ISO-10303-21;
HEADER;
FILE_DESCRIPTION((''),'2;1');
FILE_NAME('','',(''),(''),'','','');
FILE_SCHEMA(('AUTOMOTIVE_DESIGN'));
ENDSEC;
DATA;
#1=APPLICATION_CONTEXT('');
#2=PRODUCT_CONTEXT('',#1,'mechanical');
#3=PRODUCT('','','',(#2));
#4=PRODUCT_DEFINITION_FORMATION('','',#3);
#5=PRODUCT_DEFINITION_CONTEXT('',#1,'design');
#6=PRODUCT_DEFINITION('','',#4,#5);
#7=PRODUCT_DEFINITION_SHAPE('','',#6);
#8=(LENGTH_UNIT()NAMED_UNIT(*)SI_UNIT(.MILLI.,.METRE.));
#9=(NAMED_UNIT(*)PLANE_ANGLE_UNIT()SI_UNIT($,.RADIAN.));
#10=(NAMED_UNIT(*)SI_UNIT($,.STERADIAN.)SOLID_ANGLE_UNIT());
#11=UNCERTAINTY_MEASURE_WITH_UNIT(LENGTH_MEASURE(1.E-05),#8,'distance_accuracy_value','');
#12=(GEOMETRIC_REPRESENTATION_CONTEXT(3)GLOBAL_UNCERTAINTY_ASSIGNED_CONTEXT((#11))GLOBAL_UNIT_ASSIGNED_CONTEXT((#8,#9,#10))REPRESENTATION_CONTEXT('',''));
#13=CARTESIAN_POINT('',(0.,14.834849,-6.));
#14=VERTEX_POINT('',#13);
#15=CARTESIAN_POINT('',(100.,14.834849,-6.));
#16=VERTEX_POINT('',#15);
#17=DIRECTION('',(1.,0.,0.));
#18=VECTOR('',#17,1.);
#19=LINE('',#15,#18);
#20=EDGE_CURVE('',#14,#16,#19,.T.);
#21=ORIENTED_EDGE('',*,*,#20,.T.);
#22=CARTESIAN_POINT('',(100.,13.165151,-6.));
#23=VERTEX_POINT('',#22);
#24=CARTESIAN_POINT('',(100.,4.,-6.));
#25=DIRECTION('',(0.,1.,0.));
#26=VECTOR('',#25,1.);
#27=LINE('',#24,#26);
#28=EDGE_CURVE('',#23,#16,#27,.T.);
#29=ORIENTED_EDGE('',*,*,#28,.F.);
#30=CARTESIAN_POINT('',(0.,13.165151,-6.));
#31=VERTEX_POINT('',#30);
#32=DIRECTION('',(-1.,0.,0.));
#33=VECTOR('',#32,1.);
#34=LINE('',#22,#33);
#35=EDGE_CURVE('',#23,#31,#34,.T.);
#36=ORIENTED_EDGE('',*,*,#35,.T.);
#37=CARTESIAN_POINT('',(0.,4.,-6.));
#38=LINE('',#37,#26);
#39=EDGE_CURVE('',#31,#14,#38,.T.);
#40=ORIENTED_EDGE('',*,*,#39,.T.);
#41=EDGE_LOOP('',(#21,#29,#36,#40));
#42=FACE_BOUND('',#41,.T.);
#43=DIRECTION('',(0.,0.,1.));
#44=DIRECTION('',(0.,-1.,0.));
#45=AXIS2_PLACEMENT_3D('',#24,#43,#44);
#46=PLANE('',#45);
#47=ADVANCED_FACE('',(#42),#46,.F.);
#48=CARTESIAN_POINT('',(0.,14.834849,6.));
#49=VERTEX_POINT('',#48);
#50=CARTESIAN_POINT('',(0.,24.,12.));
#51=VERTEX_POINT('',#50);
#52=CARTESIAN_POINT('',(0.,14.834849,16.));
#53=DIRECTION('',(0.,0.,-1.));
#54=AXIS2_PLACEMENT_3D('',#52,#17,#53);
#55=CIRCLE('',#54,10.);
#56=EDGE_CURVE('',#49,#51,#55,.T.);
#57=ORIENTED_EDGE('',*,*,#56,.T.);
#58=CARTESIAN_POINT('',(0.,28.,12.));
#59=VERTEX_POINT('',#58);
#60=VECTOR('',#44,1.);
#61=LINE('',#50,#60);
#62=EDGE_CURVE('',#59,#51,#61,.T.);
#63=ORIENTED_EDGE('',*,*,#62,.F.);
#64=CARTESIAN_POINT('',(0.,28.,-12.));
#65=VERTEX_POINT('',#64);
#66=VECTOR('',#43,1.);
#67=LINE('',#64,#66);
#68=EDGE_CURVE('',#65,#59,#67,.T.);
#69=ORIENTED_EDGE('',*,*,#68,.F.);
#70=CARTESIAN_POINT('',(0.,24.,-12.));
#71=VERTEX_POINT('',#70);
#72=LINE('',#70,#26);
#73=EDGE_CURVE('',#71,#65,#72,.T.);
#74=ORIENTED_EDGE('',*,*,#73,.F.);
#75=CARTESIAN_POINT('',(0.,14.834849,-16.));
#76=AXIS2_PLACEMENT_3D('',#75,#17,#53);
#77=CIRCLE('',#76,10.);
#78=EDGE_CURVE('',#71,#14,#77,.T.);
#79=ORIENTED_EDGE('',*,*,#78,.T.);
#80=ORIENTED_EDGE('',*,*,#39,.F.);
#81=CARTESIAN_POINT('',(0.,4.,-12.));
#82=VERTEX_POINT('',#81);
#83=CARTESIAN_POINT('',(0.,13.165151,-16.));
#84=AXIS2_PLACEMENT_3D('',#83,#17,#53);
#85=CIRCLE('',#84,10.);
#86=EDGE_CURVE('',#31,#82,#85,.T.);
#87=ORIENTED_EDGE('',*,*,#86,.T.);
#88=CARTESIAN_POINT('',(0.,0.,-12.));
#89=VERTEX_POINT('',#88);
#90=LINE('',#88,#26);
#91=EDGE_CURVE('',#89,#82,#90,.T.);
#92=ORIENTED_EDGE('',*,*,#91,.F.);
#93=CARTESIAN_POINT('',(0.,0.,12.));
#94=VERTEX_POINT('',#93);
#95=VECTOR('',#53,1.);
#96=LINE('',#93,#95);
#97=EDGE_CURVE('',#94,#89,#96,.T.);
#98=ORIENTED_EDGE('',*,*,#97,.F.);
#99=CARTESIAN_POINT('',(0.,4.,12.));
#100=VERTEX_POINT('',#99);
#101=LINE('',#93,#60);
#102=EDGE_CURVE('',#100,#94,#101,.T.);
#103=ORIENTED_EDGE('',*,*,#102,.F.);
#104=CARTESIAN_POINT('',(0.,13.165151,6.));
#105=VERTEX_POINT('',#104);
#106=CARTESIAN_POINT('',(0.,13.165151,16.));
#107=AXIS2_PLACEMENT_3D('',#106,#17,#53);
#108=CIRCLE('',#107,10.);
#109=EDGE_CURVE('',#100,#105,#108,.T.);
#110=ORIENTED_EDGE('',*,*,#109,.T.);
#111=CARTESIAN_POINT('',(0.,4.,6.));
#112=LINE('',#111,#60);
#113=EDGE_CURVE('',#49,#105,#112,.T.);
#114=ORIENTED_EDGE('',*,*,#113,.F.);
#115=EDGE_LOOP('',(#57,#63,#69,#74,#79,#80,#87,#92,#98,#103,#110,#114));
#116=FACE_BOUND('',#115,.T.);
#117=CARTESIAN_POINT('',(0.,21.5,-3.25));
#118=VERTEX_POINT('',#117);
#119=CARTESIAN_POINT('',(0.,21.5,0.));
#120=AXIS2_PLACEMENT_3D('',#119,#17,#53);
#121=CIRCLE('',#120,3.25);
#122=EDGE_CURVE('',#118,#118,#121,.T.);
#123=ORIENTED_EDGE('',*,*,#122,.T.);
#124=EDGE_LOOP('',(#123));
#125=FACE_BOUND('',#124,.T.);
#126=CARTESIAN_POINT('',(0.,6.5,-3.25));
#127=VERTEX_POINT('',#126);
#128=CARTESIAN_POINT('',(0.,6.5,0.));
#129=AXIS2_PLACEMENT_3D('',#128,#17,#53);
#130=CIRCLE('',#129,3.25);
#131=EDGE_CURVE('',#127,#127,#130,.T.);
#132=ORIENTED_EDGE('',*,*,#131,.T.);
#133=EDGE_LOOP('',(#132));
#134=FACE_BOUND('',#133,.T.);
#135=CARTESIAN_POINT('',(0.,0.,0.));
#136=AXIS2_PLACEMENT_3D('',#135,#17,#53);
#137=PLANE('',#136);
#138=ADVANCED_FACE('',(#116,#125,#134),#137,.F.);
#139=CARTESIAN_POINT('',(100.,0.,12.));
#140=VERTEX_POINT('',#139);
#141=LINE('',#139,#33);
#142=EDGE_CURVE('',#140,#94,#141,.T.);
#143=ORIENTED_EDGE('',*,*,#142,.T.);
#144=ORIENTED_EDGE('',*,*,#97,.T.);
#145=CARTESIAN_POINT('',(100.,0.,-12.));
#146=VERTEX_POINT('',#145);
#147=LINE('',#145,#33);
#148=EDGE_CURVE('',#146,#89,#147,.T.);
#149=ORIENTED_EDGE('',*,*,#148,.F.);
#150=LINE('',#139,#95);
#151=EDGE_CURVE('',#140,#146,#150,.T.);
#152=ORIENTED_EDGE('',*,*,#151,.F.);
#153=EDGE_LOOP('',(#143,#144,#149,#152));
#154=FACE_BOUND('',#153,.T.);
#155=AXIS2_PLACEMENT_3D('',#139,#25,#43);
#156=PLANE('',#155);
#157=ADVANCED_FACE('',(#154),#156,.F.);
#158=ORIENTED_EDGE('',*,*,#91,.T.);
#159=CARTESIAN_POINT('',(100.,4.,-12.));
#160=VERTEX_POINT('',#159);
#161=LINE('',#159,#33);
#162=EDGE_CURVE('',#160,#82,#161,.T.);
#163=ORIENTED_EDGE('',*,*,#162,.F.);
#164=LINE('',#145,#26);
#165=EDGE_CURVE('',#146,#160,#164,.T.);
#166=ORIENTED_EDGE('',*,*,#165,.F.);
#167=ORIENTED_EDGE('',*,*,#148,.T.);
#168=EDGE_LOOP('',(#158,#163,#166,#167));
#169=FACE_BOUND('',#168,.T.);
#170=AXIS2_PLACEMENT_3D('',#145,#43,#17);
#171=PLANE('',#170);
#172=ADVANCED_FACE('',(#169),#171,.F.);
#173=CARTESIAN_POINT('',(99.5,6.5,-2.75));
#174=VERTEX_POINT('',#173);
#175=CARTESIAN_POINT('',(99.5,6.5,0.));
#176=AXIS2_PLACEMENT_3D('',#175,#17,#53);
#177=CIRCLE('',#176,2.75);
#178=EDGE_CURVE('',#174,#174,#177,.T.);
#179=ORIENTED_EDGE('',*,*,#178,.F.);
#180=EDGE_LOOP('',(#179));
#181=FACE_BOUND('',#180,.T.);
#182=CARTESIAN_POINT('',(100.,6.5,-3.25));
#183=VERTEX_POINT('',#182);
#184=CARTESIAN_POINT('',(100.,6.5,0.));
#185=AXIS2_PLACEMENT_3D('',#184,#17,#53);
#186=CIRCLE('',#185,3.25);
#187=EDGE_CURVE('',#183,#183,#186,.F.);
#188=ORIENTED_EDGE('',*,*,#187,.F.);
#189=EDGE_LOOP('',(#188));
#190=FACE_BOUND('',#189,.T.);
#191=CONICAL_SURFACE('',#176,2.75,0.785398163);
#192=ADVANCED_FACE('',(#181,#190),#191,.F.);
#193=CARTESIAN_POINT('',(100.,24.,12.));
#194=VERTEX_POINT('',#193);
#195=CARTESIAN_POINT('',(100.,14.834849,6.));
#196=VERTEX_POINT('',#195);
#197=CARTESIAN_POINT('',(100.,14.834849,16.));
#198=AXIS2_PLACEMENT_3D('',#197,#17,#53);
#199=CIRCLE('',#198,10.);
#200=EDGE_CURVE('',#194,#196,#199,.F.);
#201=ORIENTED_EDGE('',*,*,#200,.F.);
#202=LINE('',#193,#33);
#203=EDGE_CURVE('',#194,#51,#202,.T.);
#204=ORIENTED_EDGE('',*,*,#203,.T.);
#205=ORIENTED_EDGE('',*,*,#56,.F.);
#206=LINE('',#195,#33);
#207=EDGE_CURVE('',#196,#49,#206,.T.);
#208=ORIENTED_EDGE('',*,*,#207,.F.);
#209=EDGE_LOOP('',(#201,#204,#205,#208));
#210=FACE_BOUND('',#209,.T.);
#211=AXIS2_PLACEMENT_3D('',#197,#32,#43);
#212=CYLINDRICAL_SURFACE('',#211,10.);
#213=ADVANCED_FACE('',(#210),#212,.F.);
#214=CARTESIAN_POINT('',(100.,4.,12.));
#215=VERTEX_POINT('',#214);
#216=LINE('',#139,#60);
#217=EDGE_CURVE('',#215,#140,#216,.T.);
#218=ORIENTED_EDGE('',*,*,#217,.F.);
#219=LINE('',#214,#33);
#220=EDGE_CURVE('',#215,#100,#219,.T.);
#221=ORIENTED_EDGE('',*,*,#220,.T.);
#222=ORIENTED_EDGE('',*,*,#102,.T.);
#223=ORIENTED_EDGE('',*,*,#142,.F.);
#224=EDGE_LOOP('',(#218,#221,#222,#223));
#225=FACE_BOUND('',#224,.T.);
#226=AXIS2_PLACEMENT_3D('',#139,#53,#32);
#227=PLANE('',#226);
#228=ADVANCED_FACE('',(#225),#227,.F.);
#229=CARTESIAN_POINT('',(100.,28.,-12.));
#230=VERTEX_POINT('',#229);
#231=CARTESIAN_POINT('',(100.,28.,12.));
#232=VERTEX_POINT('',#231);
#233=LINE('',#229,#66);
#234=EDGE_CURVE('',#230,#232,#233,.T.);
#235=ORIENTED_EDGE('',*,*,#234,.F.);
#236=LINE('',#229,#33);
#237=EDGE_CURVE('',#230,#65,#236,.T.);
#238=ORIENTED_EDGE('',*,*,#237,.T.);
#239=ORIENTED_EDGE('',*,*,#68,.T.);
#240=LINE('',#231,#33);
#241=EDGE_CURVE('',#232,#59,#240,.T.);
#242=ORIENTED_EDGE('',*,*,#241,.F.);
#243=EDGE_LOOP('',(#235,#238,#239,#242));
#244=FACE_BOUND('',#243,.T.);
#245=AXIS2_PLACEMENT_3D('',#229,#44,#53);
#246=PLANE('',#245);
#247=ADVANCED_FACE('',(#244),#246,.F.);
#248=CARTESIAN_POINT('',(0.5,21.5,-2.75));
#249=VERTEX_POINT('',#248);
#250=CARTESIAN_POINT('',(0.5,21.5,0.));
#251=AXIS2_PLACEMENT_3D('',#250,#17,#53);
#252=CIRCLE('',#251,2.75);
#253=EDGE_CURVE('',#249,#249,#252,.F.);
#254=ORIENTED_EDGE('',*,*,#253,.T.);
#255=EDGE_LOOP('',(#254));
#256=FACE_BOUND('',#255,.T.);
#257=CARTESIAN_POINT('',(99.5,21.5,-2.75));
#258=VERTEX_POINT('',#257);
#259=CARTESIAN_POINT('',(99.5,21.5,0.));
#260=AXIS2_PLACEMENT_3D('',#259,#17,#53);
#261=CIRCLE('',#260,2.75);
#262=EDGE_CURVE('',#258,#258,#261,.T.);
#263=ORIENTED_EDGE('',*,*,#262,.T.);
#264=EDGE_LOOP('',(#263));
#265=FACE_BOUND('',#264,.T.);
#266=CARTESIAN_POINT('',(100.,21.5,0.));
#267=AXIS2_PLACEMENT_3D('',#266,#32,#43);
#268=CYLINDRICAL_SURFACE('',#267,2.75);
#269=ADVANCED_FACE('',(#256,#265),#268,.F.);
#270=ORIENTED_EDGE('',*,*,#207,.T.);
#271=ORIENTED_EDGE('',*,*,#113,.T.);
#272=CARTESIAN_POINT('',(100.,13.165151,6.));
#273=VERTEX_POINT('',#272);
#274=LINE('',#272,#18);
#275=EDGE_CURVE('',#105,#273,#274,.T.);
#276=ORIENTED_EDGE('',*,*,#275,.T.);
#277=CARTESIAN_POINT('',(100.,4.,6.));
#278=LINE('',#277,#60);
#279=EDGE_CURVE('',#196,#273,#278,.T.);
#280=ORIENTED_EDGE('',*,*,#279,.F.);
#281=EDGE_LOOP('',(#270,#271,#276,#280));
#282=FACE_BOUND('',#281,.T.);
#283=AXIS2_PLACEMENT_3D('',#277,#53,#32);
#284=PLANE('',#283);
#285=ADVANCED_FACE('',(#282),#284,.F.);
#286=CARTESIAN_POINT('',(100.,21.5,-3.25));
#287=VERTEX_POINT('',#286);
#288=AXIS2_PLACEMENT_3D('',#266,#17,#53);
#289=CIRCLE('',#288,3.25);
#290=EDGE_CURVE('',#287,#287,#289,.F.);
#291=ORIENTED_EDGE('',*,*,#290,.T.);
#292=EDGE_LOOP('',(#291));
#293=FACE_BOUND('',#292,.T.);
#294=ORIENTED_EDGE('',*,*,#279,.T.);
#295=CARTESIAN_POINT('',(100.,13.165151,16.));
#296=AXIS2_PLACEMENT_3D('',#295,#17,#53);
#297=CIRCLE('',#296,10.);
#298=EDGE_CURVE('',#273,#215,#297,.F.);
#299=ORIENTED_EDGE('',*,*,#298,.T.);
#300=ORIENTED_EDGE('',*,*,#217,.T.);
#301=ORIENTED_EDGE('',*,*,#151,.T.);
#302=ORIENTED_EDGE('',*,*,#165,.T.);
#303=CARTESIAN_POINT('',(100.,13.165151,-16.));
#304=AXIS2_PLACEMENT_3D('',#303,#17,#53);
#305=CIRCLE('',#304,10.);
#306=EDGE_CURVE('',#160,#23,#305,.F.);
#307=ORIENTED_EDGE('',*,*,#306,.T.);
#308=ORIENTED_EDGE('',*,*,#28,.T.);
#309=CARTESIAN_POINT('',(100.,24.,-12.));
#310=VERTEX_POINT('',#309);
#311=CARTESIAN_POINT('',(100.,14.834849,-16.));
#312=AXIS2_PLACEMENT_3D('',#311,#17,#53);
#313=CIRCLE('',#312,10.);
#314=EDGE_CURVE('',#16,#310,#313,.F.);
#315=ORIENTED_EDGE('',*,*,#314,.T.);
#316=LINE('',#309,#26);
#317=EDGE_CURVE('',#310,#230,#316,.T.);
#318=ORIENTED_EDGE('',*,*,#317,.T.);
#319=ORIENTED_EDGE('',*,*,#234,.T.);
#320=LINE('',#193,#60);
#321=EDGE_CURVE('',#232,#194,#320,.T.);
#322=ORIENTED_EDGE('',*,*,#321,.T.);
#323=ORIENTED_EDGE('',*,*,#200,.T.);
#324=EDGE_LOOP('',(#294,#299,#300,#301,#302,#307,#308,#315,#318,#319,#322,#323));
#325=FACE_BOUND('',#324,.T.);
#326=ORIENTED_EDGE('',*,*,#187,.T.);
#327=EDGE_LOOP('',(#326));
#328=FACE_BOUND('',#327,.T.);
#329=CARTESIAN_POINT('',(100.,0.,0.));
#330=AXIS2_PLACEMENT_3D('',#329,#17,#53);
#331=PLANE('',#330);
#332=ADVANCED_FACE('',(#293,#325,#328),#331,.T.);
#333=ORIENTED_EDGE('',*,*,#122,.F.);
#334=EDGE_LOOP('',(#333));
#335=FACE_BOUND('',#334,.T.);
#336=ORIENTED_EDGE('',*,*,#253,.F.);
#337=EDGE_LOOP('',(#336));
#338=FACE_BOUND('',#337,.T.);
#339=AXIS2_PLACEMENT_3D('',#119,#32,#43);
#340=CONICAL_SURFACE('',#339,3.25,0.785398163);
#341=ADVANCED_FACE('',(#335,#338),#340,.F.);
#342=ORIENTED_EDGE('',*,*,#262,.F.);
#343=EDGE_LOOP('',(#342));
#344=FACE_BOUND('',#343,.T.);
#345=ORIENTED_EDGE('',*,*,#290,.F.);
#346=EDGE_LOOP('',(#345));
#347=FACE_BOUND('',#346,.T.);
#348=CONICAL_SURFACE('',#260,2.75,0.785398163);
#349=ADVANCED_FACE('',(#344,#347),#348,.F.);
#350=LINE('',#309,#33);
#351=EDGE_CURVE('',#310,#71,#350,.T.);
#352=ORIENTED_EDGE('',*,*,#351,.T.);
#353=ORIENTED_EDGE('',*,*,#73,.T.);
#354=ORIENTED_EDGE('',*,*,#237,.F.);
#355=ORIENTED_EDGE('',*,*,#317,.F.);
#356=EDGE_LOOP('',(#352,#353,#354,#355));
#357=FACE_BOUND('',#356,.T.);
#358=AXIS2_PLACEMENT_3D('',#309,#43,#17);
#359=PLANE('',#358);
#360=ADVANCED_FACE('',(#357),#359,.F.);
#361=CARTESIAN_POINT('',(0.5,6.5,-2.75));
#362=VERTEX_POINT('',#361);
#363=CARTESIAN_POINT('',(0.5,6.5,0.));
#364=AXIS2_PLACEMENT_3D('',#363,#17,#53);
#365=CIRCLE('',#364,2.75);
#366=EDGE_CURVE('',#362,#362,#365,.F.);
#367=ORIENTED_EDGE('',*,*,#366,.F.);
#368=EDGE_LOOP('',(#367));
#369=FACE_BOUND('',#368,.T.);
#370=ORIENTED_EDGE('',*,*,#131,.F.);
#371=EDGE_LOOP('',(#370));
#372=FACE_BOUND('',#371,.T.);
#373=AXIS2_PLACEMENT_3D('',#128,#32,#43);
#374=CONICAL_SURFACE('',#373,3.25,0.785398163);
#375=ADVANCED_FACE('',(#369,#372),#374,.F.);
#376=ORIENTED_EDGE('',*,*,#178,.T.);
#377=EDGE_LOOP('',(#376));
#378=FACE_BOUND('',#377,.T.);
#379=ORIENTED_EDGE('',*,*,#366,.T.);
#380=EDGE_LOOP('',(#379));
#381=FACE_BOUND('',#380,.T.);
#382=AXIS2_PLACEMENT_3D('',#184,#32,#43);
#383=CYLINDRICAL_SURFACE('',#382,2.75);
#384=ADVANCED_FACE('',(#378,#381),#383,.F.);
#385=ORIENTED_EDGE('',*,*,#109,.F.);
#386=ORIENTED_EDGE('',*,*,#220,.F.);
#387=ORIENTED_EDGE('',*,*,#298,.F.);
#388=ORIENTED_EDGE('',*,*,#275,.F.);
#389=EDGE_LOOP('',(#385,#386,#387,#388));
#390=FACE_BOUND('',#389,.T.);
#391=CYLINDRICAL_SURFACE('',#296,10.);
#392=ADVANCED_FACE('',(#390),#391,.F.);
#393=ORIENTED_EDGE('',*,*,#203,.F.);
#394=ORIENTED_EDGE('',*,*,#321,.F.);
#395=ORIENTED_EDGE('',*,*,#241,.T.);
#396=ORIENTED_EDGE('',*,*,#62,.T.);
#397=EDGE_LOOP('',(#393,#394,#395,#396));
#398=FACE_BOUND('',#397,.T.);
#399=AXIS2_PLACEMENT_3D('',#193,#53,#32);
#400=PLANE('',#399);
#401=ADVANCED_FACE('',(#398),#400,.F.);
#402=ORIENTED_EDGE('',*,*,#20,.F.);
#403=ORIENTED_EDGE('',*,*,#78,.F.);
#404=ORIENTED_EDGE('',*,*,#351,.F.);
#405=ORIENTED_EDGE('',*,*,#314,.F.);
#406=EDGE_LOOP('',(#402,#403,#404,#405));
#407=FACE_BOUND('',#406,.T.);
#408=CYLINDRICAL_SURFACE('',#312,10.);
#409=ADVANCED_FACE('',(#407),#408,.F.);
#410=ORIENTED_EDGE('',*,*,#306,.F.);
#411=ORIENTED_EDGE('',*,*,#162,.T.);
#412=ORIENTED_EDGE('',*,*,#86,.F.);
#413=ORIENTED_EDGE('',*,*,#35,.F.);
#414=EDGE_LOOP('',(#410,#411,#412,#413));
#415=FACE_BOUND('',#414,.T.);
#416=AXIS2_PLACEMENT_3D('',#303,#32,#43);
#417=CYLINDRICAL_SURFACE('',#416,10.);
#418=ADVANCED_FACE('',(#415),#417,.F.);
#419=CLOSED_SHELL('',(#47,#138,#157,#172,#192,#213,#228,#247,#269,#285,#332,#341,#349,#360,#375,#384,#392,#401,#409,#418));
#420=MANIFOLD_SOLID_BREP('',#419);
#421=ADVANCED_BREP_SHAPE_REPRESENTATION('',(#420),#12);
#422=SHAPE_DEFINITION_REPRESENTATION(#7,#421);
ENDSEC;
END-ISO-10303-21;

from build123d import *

# Parameters (mm, degrees)
SKETCH_1_R      = 2.75
EXTRUDE_1_DEPTH = 100
FILLET_1_R      = 10
CHAMFER_1_SIZE  = 0.5


with BuildPart() as part:
    # 草图1 → 凸台-拉伸1 (new body)
    with BuildSketch(Plane(origin=(0, 0, 0), x_dir=(0, 0, -1), z_dir=(1, 0, 0))):
        Polygon((-12, 0), (12, 0), (12, 4), (6, 4), (6, 24), (12, 24), (12, 28), (-12, 28), (-12, 24), (-6, 24), (-6, 4), (-12, 4), align=None)
        with Locations((0, 21.5)):
            Circle(SKETCH_1_R, mode=Mode.SUBTRACT)
        with Locations((0, 6.5)):
            Circle(SKETCH_1_R, mode=Mode.SUBTRACT)
    extrude(amount=EXTRUDE_1_DEPTH)

    # 圆角1
    # the kernel refuses this fillet: 10 mm, written as the material it adds along each edge
    with BuildSketch(Plane(origin=(0, 24, -6), x_dir=(0, -1, 0), z_dir=(1, 0, 0)), Plane(origin=(0, 4, 6), x_dir=(0, 1, 0), z_dir=(1, 0, 0))) as fillet_1_piece_1:
        with BuildLine():
            CenterArc((9.16515139, 10), FILLET_1_R, 203.578178478, 66.421821522)
            Line((0, 6), (-0.183303028, 5.92))
            ThreePointArc((-0.183303028, 5.92), (-0.2, 3), (-0.2, 0))
            Line((-0.2, 0), (0, -0.2))
            Line((0, -0.2), (9.16515139, -0.2))
            Line((9.16515139, -0.2), (9.16515139, 0))
        make_face()
    extrude(amount=100)
    with BuildSketch(Plane(origin=(0, 4, -6), x_dir=(0, 0, -1), z_dir=(1, 0, 0)), Plane(origin=(0, 24, 6), x_dir=(0, 0, 1), z_dir=(1, 0, 0))) as fillet_1_piece_2:
        with BuildLine():
            CenterArc((10, 9.16515139), FILLET_1_R, 180, 66.421821522)
            Line((0, 9.16515139), (-0.2, 9.16515139))
            Line((-0.2, 9.16515139), (-0.2, 0))
            Line((-0.2, 0), (0, -0.2))
            ThreePointArc((0, -0.2), (3, -0.2), (5.92, -0.183303028))
            Line((5.92, -0.183303028), (6, 0))
        make_face()
    extrude(amount=100)

    # 倒角1
    chamfer_1_edges = [part.edges().sort_by_distance(p)[0] for p in [
        (0, 21.5, 2.75),
        (100, 21.5, 2.75),
        (0, 6.5, 2.75),
        (100, 6.5, 2.75),
    ]]
    chamfer(chamfer_1_edges, length=CHAMFER_1_SIZE)


solid = part.part
